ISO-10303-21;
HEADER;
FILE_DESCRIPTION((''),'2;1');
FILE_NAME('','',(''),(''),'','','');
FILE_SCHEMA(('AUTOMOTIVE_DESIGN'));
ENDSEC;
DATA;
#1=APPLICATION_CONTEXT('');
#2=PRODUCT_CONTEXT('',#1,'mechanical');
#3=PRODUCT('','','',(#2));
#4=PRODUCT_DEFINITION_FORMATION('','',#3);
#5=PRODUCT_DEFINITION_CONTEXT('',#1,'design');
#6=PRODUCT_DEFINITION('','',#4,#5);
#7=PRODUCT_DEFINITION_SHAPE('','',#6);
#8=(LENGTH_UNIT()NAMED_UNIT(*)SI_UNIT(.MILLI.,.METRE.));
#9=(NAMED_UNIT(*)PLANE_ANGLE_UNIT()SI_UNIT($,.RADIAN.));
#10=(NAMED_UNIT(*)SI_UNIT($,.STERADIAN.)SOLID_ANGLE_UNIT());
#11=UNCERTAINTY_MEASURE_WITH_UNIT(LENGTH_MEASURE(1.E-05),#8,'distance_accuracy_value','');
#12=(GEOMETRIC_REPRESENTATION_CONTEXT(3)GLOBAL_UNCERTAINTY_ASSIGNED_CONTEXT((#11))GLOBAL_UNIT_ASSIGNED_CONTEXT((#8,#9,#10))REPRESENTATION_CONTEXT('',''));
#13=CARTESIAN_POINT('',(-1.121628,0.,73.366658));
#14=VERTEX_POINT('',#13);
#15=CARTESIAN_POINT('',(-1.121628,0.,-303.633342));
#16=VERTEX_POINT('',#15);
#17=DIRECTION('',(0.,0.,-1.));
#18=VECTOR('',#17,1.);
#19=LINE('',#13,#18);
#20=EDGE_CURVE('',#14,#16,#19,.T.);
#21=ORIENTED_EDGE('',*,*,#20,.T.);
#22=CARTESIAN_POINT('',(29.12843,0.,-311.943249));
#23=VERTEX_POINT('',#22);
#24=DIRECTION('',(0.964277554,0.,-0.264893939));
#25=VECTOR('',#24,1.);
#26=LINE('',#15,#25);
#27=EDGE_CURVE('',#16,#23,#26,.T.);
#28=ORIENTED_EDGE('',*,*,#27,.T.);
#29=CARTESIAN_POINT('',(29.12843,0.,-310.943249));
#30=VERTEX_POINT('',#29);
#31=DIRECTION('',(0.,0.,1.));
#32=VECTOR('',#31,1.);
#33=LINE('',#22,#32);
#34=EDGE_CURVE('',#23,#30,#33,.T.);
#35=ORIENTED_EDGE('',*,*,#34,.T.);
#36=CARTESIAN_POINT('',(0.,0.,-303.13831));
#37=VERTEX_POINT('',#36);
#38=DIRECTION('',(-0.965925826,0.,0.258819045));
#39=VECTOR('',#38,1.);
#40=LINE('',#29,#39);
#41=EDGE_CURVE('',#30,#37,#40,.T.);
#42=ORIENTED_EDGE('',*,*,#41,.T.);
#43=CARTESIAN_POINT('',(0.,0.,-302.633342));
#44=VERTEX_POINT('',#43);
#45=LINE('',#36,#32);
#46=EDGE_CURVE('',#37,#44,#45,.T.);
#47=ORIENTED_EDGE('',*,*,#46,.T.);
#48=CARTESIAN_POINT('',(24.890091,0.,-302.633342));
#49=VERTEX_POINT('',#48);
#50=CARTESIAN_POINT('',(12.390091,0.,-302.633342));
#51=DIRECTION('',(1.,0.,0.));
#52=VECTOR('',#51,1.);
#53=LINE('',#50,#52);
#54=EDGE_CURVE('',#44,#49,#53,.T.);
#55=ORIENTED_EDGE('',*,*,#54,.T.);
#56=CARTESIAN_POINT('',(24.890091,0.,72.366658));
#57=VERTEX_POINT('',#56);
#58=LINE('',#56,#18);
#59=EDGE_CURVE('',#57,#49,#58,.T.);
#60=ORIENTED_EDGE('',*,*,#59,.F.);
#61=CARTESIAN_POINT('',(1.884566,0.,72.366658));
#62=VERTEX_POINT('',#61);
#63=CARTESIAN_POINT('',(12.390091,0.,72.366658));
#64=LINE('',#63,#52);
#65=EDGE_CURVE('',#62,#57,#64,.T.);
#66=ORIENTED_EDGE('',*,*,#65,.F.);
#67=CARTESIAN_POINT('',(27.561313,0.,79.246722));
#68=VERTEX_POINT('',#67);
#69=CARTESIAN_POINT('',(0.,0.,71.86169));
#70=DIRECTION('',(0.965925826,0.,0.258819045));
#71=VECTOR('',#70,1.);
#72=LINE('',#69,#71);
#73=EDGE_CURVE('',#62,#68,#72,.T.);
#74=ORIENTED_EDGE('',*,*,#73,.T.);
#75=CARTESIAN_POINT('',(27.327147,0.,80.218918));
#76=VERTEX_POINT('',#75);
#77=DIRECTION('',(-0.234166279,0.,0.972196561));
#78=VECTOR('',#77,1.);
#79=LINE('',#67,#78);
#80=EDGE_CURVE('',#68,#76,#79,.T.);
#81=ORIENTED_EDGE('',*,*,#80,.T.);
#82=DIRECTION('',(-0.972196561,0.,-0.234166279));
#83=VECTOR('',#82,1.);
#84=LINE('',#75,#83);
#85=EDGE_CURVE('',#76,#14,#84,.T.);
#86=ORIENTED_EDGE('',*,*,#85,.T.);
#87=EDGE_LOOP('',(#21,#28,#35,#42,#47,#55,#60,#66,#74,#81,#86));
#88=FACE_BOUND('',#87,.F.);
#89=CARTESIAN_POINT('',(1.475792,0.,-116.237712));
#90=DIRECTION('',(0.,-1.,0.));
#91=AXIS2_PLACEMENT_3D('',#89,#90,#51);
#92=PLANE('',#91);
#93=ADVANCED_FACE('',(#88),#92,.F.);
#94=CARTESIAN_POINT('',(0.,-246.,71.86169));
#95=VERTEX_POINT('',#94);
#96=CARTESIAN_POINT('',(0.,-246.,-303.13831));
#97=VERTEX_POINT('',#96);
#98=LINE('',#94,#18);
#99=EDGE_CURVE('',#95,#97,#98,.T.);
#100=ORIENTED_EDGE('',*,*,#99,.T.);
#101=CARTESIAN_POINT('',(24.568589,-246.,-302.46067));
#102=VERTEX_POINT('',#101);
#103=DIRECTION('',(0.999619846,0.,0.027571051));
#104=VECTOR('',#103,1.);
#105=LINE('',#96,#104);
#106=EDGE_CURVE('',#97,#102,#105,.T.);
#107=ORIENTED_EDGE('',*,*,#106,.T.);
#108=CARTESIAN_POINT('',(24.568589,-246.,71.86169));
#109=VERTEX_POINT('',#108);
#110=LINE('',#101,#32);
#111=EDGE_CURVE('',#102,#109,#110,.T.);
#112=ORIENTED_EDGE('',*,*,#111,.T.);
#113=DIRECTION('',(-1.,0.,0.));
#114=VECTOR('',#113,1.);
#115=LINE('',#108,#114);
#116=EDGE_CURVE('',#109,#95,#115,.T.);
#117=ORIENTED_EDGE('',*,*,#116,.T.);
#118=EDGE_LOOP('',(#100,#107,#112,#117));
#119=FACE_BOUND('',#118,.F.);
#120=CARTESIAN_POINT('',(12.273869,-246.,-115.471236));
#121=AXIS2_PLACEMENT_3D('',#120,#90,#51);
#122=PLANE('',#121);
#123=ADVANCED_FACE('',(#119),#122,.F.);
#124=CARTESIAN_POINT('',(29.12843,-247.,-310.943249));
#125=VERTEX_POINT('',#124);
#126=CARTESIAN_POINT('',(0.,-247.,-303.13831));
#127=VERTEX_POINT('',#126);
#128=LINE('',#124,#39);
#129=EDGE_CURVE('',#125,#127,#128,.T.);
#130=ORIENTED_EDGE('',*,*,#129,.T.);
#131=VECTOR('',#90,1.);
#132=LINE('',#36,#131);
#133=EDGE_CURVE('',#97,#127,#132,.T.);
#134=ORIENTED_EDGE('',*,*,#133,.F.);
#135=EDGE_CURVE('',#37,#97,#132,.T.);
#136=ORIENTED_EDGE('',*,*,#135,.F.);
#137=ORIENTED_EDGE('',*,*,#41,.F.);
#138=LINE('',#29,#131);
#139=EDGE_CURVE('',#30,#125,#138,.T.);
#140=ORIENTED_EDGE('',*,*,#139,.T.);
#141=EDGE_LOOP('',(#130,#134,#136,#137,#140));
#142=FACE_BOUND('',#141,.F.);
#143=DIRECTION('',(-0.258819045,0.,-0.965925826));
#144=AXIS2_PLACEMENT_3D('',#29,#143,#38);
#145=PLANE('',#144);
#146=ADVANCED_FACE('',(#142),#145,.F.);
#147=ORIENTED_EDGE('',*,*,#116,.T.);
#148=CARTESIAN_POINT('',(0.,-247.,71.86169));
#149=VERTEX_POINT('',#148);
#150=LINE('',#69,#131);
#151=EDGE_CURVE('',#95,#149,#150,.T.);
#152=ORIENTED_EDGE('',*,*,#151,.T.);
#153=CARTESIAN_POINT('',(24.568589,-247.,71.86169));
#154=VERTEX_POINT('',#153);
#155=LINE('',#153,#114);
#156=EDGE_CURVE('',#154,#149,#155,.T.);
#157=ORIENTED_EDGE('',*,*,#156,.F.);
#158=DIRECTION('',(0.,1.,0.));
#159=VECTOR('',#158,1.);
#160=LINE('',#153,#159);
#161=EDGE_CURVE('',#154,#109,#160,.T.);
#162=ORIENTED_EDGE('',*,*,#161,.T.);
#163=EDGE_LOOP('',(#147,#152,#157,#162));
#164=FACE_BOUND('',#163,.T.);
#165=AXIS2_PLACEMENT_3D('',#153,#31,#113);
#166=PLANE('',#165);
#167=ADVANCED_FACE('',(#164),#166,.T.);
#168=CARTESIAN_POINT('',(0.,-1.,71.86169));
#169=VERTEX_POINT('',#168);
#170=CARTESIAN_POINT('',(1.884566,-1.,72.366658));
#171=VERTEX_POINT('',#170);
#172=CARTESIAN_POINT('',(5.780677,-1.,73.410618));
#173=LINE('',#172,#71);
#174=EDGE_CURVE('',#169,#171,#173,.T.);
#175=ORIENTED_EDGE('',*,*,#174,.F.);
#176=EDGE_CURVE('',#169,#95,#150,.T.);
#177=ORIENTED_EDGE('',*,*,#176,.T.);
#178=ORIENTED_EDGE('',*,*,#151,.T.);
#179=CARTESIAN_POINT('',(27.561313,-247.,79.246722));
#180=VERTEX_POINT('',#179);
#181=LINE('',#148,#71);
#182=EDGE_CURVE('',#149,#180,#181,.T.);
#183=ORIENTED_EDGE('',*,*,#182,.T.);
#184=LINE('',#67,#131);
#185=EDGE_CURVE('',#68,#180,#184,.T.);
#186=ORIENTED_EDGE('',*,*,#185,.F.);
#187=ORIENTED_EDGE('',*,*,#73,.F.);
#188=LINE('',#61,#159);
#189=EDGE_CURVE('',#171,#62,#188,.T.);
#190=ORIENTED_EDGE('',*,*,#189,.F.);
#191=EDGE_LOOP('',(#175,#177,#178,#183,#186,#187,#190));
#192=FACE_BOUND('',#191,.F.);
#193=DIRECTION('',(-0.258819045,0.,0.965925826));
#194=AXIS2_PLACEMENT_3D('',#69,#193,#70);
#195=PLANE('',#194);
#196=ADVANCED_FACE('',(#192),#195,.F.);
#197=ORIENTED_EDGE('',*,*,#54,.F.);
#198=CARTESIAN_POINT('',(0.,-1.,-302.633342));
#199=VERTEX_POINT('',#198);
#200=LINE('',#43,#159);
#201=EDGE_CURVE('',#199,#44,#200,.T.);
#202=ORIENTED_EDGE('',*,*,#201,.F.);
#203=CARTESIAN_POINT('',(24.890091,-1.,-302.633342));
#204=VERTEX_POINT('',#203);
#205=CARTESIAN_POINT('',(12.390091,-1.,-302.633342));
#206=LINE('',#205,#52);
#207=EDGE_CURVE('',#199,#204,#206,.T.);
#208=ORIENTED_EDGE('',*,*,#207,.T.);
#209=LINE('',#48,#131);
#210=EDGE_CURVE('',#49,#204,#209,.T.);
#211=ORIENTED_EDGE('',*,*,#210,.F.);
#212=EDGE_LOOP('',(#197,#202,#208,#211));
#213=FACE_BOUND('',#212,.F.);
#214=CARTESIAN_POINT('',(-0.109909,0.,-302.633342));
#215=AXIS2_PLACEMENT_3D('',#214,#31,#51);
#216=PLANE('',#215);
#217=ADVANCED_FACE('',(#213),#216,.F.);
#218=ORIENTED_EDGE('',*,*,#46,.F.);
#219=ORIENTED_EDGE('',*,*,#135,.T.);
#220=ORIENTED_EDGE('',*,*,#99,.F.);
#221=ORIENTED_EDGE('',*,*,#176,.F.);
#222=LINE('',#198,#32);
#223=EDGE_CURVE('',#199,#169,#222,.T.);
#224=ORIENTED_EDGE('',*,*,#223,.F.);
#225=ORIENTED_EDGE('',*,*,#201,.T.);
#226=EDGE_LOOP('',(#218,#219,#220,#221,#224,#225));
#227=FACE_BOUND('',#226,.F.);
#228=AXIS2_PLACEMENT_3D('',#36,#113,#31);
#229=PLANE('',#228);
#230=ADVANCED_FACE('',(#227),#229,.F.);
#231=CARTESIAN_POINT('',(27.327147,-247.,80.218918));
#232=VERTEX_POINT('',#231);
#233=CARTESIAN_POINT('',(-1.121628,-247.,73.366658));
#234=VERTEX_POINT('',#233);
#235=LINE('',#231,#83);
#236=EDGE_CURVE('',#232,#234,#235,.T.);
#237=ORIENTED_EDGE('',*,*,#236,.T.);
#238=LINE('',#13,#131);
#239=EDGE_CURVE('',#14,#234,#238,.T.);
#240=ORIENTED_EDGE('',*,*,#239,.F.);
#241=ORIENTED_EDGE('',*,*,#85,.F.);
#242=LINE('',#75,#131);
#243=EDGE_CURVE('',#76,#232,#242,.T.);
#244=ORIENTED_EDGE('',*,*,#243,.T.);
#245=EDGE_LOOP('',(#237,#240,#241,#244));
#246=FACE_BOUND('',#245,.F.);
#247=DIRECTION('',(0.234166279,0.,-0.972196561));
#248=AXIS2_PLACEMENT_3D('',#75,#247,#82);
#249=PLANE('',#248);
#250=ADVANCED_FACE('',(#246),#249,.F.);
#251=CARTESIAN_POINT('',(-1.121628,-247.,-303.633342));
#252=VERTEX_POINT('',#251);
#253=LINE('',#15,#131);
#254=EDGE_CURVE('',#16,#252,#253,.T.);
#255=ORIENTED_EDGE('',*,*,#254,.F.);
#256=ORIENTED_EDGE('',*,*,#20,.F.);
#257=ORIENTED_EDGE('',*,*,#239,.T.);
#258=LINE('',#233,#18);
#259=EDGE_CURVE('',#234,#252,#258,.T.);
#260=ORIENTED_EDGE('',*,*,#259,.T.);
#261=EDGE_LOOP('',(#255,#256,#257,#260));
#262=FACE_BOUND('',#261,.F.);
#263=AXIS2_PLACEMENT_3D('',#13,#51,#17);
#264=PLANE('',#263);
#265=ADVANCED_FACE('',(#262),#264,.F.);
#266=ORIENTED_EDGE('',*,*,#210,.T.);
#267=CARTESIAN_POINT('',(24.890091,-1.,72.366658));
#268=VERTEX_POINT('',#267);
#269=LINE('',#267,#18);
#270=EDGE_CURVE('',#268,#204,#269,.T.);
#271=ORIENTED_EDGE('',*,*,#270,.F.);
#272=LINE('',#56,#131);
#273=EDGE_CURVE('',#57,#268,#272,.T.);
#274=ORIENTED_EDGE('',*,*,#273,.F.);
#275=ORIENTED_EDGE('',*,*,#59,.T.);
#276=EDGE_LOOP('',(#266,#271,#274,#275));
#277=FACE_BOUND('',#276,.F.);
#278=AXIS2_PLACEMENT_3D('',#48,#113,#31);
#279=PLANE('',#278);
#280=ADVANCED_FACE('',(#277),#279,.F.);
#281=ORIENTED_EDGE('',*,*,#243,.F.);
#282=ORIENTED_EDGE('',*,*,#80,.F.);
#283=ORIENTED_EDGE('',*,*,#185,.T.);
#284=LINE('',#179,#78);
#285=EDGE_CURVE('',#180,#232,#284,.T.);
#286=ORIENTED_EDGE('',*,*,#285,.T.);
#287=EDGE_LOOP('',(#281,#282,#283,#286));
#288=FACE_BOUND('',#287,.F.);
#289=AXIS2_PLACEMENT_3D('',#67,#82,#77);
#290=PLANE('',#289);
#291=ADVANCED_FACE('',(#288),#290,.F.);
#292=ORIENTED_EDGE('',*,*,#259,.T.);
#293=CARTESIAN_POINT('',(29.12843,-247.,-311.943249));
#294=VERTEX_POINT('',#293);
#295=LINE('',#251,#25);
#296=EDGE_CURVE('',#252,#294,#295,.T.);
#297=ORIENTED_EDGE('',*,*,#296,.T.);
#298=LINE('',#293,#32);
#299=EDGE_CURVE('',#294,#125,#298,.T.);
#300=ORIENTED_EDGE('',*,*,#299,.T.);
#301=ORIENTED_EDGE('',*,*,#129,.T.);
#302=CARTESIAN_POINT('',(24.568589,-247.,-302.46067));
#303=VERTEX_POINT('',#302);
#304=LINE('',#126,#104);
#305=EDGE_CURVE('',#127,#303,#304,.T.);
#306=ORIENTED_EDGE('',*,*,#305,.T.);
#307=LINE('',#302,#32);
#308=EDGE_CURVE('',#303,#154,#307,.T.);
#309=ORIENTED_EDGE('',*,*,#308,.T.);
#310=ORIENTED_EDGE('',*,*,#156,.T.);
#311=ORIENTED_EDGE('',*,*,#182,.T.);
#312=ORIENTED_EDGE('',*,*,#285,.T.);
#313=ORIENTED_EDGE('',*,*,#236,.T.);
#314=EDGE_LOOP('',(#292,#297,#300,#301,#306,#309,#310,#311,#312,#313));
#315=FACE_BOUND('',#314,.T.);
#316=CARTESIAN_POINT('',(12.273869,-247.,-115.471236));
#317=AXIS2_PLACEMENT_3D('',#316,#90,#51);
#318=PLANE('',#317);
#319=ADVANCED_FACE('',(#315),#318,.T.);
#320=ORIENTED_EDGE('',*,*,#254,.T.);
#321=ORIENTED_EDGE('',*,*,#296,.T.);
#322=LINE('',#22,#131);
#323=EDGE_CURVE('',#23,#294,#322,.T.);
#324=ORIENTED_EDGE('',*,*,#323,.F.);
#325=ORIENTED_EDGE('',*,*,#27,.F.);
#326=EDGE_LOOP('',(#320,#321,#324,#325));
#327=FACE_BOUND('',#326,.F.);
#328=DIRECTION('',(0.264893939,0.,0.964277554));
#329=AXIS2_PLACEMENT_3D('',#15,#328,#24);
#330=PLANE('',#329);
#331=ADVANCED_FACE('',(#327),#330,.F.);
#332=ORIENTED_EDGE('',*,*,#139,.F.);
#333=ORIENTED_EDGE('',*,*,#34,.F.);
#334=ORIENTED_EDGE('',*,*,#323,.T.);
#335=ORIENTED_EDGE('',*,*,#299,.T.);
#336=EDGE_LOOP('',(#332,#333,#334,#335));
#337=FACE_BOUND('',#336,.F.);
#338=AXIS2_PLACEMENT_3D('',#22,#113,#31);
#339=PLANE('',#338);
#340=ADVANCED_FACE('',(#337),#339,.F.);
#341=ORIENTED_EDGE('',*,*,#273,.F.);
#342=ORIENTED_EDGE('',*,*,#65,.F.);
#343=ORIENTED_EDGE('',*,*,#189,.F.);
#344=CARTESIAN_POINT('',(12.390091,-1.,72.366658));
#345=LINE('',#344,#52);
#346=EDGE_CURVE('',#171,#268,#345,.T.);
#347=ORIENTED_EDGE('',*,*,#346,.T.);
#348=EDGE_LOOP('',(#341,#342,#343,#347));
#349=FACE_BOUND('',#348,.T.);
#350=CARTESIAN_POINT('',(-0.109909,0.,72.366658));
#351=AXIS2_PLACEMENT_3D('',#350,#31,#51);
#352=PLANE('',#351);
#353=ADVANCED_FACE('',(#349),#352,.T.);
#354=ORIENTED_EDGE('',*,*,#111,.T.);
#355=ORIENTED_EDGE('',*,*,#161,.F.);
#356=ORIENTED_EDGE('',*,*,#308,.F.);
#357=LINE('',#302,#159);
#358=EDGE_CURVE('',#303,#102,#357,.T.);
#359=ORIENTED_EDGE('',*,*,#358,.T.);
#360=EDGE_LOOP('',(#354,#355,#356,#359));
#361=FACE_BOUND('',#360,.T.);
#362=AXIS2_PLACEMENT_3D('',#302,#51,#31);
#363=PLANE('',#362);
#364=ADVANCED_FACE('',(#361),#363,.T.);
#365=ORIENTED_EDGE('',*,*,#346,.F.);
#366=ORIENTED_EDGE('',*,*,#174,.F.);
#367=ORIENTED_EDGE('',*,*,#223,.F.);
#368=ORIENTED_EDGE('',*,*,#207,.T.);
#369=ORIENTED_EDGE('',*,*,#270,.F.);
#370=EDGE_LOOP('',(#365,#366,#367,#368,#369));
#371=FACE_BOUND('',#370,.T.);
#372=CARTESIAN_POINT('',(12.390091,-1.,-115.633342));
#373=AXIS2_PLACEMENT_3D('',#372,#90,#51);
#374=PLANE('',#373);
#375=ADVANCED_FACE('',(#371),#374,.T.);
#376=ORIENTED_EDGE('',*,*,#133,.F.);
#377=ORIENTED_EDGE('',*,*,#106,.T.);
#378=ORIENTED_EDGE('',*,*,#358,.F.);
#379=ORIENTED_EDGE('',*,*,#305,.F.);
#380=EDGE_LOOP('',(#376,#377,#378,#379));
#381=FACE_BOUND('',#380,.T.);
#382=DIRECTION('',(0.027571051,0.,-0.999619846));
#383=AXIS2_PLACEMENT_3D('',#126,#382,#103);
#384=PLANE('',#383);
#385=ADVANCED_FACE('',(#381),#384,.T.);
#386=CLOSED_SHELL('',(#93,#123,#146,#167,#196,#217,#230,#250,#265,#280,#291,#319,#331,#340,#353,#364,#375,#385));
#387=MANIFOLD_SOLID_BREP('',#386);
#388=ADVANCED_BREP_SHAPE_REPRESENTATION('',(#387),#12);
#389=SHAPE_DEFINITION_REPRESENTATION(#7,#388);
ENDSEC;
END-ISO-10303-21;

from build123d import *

# Parameters (mm, degrees)
F1_DEPTH = 247
F2_W     = 25
F2_H     = 1
F3_DEPTH = 1
F2_H_2   = 374
F4_DEPTH = 1
F6_DEPTH = 1


# Not quite as in the source:
# - a feature names something its author has since deleted; it is built from what else it names


with BuildPart() as f1:
    # F0 (on Front) → F1 (new body)
    with BuildSketch(Plane.XZ):
        Polygon((-1.1216281516, 73.3666580543), (-1.1216281516, 72.3666580543), (-1.1216281516, -302.6333419457), (-1.1216281516, -303.6333419457), (29.1284304133, -311.9432493216), (29.1284304133, -310.9432493216), (0, -303.1383099156), (0, 71.8616900844), (27.561313438, 79.2467217624), (27.3271471585, 80.2189183236), align=None)
    extrude(amount=F1_DEPTH)

    # F2 (on Front) → F3 (join)
    with BuildSketch(Plane.XZ):
        with Locations((12.390091487, 71.8666580543)):
            Rectangle(F2_W, F2_H)
    extrude(amount=F3_DEPTH)

    # F2 (on Front) → F4 (join)
    with BuildSketch(Plane.XZ):
        with Locations((12.390091487, -115.6333419457)):
            Rectangle(F2_W, F2_H_2)
    extrude(amount=F4_DEPTH)

    # F5 (on face) → F6 (join)
    with BuildSketch(Plane.XZ.offset(247)):
        Polygon((24.5685894042, 71.8616900844), (0, 71.8616900844), (0, -303.1383099156), (24.5685894042, -302.4606704712), align=None)
    extrude(amount=-F6_DEPTH)


solid = f1.part
